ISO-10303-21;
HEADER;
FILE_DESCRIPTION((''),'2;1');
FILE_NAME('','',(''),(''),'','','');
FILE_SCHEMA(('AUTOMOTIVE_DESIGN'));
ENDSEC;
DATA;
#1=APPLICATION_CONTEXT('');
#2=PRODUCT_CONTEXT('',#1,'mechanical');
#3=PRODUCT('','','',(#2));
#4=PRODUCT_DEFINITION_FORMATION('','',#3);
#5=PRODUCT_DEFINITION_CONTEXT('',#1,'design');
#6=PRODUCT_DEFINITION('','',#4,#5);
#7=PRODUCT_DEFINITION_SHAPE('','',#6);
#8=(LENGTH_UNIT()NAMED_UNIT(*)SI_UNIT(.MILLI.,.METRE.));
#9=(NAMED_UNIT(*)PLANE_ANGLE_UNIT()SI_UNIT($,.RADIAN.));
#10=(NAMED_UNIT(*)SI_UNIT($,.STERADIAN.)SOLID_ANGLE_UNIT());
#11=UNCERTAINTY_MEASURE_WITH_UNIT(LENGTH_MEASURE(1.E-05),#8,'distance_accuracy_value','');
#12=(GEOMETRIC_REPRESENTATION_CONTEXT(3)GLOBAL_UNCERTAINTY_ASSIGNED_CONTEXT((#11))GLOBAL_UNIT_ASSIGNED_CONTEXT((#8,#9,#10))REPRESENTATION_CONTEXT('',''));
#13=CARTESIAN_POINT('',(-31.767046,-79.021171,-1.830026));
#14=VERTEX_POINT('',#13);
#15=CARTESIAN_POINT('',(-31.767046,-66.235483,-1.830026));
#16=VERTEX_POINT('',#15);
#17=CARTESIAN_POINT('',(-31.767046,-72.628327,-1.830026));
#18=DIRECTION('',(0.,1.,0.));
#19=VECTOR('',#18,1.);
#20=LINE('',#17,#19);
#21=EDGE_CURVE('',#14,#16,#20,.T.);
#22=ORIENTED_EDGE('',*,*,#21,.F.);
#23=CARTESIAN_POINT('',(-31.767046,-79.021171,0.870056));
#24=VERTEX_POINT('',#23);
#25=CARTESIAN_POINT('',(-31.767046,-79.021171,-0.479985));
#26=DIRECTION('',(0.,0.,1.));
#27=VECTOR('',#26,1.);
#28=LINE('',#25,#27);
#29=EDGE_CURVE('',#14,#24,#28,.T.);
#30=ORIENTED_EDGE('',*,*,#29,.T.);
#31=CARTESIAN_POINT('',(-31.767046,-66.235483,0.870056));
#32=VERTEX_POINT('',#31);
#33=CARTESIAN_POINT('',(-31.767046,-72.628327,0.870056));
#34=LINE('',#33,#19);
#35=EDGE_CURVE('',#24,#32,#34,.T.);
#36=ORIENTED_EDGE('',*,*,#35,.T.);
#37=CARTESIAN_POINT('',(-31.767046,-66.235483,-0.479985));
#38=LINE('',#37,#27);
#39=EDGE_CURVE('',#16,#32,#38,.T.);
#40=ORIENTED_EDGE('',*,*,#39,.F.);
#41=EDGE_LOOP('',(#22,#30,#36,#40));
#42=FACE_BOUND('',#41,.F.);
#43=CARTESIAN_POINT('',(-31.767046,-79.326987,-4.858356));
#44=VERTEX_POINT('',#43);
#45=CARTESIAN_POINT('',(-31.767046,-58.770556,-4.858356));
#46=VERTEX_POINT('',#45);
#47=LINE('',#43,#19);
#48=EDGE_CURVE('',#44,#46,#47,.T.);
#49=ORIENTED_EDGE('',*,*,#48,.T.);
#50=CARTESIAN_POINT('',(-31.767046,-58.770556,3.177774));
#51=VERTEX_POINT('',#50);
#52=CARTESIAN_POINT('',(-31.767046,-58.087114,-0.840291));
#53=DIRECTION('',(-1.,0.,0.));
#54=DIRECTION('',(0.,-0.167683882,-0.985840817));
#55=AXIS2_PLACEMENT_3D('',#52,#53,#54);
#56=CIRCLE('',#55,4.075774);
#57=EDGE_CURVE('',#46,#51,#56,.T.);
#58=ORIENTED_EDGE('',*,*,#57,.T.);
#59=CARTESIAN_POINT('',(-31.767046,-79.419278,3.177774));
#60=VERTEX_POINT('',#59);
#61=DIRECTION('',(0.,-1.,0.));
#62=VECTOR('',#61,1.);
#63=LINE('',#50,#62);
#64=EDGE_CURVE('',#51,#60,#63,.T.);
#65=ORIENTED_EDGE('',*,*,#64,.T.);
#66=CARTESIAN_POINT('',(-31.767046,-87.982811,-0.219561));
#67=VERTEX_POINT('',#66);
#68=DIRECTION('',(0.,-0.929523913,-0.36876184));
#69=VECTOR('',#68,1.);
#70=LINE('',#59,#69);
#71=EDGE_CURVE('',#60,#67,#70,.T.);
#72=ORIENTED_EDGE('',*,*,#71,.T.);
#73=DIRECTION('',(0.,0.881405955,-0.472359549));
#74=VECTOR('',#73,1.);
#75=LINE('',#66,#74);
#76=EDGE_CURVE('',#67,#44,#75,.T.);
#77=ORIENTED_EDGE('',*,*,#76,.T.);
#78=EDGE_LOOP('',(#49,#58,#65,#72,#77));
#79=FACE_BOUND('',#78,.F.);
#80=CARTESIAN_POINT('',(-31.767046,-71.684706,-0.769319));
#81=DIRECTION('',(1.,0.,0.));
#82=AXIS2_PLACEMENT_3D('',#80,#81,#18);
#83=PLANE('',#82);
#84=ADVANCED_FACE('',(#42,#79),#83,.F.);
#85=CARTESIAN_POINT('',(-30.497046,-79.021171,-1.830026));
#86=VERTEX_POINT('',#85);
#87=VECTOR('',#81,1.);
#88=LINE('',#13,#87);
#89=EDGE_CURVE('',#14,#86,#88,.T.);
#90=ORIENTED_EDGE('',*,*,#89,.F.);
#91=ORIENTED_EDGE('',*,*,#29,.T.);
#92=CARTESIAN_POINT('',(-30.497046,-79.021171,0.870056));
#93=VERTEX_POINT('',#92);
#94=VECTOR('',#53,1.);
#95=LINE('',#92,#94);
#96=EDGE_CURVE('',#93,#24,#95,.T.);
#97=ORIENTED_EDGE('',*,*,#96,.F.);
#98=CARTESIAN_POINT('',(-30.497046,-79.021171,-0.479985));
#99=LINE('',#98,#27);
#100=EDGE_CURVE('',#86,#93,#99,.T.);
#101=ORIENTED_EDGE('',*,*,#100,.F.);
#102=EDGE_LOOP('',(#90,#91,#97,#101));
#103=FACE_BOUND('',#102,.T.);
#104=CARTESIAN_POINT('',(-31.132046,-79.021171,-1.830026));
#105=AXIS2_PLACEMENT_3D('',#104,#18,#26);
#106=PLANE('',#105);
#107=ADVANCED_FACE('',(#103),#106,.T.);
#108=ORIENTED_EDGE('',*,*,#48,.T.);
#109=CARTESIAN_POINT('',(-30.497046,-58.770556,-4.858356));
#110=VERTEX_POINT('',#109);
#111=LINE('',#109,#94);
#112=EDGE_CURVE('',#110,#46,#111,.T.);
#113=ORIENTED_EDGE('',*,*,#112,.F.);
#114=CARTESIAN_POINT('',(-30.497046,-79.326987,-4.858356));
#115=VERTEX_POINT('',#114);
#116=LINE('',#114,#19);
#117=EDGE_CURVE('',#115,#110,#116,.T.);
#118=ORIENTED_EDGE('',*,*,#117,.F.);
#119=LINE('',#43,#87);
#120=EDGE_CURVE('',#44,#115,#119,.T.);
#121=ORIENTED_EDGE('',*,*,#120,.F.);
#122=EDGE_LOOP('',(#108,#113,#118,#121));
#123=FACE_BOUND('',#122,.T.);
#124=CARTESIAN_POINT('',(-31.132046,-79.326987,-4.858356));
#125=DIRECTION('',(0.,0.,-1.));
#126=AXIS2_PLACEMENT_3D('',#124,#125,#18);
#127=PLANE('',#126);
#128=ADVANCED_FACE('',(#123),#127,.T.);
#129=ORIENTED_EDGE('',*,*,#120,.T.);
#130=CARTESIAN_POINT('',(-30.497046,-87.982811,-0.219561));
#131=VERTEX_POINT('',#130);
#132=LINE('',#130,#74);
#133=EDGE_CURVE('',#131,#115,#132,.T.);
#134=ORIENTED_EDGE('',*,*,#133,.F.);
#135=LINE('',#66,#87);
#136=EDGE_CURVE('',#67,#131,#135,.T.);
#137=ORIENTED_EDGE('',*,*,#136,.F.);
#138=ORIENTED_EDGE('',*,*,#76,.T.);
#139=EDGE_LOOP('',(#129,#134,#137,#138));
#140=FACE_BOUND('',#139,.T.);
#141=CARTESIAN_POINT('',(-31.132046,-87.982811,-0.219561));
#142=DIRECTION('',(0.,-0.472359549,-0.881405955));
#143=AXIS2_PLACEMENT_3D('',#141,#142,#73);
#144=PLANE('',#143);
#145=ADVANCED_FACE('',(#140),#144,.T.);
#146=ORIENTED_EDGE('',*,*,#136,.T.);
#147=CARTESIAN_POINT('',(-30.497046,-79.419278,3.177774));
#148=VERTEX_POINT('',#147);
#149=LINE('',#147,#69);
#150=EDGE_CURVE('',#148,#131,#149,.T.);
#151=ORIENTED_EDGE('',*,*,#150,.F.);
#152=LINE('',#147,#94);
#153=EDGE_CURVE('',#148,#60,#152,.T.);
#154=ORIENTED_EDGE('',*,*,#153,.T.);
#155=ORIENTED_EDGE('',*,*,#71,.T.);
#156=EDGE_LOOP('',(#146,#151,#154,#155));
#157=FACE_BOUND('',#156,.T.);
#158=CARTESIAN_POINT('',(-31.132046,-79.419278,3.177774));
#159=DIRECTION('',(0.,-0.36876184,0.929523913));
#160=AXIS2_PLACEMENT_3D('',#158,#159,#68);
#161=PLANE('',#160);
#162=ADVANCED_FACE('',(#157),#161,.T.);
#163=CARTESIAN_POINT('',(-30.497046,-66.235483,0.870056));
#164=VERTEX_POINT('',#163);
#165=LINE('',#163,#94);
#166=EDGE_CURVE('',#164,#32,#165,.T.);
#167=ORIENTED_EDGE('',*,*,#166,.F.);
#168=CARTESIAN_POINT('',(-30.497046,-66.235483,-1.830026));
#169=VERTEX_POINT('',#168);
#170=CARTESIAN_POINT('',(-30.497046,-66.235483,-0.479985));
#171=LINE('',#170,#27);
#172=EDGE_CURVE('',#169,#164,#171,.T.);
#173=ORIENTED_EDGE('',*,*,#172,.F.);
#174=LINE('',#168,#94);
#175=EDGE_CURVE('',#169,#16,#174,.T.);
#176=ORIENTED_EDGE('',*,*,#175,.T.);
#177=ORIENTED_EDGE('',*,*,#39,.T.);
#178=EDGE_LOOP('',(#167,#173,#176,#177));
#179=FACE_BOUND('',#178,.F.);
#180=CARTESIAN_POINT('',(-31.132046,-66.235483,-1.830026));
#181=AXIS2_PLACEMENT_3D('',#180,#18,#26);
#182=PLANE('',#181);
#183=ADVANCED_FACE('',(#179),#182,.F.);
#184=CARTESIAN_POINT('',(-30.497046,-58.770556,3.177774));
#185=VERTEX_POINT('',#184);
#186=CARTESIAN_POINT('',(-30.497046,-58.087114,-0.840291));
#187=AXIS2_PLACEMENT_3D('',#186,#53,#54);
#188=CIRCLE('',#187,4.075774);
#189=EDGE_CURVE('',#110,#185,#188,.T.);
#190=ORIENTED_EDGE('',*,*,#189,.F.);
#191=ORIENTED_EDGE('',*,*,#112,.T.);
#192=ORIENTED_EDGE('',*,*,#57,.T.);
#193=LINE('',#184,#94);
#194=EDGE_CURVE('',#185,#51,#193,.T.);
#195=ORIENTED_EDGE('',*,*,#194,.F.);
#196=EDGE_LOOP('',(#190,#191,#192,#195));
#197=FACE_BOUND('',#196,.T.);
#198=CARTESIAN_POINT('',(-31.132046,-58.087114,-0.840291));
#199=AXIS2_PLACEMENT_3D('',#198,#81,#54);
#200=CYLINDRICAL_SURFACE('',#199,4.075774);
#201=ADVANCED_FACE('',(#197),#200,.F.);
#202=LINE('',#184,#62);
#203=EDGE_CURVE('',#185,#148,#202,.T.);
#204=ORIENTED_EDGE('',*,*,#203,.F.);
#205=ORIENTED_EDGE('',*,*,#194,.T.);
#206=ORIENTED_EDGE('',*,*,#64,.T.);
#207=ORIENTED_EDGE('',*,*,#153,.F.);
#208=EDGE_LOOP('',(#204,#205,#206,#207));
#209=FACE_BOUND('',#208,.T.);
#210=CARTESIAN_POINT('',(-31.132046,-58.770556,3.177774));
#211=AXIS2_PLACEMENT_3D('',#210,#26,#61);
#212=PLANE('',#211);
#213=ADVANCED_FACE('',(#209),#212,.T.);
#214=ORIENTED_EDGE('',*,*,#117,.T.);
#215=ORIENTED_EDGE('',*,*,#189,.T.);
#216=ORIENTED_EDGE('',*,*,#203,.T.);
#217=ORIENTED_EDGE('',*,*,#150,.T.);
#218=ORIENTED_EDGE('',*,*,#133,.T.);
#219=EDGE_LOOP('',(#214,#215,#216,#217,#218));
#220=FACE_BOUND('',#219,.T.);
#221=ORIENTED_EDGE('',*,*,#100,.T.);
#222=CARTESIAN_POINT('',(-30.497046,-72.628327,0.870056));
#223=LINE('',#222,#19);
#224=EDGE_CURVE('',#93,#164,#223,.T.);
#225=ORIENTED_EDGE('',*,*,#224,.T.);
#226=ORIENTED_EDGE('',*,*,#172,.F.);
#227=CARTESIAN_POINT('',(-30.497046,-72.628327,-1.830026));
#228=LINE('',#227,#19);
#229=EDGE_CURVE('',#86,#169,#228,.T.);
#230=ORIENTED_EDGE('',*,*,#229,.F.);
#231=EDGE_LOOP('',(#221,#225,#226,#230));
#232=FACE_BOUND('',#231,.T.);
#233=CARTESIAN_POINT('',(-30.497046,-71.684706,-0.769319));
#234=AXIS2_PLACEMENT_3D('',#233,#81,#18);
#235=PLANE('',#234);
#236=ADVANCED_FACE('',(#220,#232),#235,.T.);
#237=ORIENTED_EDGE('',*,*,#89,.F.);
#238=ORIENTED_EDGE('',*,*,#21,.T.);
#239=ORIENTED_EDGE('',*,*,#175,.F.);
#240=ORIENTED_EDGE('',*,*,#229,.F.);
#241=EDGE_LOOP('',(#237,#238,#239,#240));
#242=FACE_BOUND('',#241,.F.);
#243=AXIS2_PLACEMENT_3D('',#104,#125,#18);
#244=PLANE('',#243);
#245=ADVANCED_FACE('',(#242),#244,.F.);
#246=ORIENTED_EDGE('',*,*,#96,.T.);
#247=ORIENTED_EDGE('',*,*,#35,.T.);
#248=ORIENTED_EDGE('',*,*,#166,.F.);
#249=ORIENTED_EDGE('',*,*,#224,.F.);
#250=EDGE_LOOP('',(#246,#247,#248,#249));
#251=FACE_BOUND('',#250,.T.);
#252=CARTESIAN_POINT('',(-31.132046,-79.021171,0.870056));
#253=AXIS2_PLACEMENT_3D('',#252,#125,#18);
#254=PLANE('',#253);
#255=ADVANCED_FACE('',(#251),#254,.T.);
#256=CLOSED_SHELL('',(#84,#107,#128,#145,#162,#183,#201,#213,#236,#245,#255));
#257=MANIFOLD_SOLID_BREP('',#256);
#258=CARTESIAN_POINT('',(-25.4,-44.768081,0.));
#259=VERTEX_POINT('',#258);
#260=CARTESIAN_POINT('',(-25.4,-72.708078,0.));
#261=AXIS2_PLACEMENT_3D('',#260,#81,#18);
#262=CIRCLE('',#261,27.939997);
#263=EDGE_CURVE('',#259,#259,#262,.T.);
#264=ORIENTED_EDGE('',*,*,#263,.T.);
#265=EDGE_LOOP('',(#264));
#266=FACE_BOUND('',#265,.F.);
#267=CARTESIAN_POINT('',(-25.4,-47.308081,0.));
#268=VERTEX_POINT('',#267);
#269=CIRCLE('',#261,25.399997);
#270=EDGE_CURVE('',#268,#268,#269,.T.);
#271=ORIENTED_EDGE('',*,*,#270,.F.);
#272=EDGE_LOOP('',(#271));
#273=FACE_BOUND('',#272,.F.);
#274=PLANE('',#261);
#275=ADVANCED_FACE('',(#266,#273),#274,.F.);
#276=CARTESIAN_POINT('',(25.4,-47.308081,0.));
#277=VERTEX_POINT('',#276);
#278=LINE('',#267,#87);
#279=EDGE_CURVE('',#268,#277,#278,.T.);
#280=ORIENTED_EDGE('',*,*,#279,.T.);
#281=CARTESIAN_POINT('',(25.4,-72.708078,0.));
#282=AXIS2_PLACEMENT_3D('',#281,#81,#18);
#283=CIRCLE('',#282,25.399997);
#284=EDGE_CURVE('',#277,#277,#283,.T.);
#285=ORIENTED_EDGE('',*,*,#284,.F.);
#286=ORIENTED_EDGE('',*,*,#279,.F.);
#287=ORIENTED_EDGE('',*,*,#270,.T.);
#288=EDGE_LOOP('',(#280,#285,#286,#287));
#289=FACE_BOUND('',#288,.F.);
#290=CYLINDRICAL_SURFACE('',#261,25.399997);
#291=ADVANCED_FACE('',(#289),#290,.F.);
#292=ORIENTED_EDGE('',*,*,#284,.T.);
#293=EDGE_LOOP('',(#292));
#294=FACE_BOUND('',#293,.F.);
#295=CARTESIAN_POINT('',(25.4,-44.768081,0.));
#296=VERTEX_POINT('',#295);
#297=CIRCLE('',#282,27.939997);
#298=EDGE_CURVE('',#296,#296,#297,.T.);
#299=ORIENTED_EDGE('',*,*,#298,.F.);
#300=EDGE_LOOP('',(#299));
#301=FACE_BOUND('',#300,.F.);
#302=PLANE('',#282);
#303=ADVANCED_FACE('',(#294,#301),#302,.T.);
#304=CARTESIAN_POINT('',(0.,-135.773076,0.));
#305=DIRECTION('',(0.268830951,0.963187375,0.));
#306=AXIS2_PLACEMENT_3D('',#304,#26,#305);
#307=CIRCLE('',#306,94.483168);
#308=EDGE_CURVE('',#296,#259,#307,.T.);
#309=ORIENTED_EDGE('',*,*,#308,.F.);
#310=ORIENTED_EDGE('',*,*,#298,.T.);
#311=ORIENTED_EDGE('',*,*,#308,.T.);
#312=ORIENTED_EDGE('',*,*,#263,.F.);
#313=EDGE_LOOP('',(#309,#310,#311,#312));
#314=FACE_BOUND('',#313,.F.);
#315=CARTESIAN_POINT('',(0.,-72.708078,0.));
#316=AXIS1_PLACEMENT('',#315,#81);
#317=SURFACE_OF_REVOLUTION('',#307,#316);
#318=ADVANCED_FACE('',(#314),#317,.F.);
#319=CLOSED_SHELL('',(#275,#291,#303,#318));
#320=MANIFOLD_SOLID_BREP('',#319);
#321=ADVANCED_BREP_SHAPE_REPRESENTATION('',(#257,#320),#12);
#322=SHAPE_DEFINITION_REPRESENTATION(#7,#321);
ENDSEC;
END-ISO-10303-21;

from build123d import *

# Parameters (mm, degrees)
F13_W          = 12.7856880426
F13_H          = 2.7000820846
F14_DEPTH      = 0.635
F14_DEPTH_BACK = 0.635


# Not quite as in the source:
# - a feature of the source that left no trace in its solid (it failed there, or was rolled back) is left out
# - the program builds the solid bodies; features that only make, move or delete a surface that nothing else refers to are left out


with BuildPart() as f3:
    # F2 (on plane+point) → F3 (revolve)
    with BuildSketch(Plane.XY):
        with BuildLine():
            Line((-25.4, -44.7680812202), (-25.4, -47.3080812202))
            Line((-25.4, -47.3080812202), (25.4, -47.3080812202))
            Line((25.4, -47.3080812202), (25.4, -44.7680812202))
            ThreePointArc((25.4, -44.7680812202), (0, -41.2899077912), (-25.4, -44.7680812202))
        make_face()
    revolve(axis=Axis((0, -72.7080783897, 0), (1, 0, 0)))


with BuildPart() as f14:
    # F13 (on line) → F14 (new body, two sides)
    with BuildSketch(Plane.YZ.offset(-31.1320461684)) as f14_sk:
        with BuildLine():
            Line((-79.4192776084, 3.1777741387), (-87.9828110337, -0.2195611014))
            Line((-87.9828110337, -0.2195611014), (-79.3269872665, -4.8583555035))
            Line((-79.3269872665, -4.8583555035), (-58.7705560029, -4.8583555035))
            ThreePointArc((-58.7705560029, -4.8583555035), (-62.1628887785, -0.8402906824), (-58.7705560029, 3.1777741387))
            Line((-58.7705560029, 3.1777741387), (-79.4192776084, 3.1777741387))
        make_face()
        with Locations((-72.628326714, -0.4799846502)):
            Rectangle(F13_W, F13_H, mode=Mode.SUBTRACT)
    extrude(amount=F14_DEPTH)
    extrude(f14_sk.sketch, amount=-F14_DEPTH_BACK)


solid = Compound([f3.part, f14.part])
